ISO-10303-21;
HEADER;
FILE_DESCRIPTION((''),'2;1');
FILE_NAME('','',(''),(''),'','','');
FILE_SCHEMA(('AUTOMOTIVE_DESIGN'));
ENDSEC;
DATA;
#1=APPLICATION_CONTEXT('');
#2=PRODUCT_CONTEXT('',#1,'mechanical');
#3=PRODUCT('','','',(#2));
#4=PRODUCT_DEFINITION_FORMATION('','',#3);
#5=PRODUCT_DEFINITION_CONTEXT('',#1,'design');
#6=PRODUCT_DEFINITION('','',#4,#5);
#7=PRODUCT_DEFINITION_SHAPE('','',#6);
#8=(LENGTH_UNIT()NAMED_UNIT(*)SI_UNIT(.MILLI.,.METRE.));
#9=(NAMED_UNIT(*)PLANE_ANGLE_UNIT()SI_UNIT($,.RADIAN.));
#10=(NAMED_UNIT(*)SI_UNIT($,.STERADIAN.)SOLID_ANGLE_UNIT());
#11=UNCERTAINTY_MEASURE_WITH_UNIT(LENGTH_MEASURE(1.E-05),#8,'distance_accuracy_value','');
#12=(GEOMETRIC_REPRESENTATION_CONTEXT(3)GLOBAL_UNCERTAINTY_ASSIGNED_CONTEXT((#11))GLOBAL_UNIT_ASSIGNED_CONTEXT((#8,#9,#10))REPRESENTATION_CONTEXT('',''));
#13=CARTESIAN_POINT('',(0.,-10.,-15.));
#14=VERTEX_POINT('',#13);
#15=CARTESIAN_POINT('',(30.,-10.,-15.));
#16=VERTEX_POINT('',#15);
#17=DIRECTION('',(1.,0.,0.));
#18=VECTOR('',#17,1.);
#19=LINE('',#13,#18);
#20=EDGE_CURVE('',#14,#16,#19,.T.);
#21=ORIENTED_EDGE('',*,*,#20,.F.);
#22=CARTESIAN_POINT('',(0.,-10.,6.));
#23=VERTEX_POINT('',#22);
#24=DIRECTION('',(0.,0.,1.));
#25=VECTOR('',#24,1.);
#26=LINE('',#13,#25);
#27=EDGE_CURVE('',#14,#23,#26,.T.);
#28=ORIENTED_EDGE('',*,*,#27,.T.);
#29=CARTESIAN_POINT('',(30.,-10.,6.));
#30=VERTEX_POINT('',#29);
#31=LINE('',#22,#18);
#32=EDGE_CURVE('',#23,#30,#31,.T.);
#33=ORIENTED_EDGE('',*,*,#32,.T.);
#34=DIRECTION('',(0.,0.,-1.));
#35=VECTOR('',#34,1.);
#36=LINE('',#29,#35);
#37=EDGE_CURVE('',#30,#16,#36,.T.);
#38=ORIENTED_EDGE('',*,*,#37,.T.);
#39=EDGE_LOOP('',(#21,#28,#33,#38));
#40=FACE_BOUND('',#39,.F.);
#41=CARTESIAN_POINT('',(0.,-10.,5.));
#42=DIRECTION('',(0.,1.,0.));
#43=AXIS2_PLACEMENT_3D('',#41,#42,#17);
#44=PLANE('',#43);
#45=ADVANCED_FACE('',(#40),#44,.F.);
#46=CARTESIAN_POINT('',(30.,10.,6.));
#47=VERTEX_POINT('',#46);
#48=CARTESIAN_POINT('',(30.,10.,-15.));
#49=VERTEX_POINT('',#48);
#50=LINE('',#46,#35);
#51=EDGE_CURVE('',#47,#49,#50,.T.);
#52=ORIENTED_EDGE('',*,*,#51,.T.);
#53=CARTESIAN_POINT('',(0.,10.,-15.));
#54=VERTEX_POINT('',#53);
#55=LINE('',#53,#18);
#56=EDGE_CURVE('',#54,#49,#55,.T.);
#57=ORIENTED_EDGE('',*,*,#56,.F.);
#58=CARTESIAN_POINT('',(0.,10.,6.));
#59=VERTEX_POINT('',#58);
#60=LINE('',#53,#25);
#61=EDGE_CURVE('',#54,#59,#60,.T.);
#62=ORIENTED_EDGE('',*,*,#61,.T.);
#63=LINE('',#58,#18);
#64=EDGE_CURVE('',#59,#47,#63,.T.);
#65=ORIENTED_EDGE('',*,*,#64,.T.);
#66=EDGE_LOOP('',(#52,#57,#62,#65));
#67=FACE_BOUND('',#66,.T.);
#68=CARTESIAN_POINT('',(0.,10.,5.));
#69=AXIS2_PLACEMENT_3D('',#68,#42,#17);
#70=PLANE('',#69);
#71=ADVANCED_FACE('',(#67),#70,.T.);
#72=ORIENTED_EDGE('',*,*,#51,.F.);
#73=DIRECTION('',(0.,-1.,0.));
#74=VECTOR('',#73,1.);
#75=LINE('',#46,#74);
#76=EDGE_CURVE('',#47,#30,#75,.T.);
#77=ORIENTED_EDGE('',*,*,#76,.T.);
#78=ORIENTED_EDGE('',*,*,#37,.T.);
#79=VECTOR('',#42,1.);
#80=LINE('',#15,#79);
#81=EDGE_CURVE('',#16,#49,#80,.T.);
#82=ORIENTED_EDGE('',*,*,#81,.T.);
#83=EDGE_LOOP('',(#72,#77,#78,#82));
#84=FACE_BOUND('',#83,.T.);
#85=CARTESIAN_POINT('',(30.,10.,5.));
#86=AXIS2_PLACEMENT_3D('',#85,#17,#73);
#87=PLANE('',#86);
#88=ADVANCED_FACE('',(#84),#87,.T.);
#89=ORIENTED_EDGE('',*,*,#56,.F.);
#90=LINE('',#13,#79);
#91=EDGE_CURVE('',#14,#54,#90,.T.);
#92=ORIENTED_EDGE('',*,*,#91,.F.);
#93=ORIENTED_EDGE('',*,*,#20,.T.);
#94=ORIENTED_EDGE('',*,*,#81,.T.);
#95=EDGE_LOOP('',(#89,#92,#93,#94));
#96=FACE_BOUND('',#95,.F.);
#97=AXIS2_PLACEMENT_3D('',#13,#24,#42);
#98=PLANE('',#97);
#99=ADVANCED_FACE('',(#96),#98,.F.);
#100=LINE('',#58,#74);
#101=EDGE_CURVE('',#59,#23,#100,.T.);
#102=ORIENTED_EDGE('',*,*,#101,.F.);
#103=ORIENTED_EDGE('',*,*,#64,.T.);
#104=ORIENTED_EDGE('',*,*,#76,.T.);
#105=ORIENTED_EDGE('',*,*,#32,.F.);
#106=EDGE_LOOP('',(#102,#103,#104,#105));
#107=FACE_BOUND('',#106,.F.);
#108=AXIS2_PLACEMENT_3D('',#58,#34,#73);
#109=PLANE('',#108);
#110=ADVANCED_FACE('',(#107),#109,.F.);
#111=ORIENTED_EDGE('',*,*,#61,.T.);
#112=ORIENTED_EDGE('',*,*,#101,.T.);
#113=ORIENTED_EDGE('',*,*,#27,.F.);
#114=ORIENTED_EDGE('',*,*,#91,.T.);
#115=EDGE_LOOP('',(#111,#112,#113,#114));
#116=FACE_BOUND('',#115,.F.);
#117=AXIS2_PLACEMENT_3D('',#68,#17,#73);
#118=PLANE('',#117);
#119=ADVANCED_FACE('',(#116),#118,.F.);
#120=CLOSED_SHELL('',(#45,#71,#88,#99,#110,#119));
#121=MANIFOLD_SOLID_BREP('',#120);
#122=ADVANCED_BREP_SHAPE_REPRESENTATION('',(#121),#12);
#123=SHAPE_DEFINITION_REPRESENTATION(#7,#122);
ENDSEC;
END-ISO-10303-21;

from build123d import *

# Parameters (mm, degrees)
F1_DEPTH = 30
F2_DEPTH = 1


# Not quite as in the source:
# - a feature names something its author has since deleted; it is built from what else it names


with BuildPart() as f1:
    # F0 (on Right) → F1 (new body)
    with BuildSketch(Plane.YZ):
        Polygon((10, 5), (0, 5), (-10, 5), (-10, -15), (10, -15), align=None)
    extrude(amount=F1_DEPTH)

    # F2 (add): a face of the model
    f2_faces = [f1.faces().sort_by_distance(p)[0] for p in [
        (15, 0, 5),
    ]]
    extrude(f2_faces, amount=F2_DEPTH)


solid = f1.part
